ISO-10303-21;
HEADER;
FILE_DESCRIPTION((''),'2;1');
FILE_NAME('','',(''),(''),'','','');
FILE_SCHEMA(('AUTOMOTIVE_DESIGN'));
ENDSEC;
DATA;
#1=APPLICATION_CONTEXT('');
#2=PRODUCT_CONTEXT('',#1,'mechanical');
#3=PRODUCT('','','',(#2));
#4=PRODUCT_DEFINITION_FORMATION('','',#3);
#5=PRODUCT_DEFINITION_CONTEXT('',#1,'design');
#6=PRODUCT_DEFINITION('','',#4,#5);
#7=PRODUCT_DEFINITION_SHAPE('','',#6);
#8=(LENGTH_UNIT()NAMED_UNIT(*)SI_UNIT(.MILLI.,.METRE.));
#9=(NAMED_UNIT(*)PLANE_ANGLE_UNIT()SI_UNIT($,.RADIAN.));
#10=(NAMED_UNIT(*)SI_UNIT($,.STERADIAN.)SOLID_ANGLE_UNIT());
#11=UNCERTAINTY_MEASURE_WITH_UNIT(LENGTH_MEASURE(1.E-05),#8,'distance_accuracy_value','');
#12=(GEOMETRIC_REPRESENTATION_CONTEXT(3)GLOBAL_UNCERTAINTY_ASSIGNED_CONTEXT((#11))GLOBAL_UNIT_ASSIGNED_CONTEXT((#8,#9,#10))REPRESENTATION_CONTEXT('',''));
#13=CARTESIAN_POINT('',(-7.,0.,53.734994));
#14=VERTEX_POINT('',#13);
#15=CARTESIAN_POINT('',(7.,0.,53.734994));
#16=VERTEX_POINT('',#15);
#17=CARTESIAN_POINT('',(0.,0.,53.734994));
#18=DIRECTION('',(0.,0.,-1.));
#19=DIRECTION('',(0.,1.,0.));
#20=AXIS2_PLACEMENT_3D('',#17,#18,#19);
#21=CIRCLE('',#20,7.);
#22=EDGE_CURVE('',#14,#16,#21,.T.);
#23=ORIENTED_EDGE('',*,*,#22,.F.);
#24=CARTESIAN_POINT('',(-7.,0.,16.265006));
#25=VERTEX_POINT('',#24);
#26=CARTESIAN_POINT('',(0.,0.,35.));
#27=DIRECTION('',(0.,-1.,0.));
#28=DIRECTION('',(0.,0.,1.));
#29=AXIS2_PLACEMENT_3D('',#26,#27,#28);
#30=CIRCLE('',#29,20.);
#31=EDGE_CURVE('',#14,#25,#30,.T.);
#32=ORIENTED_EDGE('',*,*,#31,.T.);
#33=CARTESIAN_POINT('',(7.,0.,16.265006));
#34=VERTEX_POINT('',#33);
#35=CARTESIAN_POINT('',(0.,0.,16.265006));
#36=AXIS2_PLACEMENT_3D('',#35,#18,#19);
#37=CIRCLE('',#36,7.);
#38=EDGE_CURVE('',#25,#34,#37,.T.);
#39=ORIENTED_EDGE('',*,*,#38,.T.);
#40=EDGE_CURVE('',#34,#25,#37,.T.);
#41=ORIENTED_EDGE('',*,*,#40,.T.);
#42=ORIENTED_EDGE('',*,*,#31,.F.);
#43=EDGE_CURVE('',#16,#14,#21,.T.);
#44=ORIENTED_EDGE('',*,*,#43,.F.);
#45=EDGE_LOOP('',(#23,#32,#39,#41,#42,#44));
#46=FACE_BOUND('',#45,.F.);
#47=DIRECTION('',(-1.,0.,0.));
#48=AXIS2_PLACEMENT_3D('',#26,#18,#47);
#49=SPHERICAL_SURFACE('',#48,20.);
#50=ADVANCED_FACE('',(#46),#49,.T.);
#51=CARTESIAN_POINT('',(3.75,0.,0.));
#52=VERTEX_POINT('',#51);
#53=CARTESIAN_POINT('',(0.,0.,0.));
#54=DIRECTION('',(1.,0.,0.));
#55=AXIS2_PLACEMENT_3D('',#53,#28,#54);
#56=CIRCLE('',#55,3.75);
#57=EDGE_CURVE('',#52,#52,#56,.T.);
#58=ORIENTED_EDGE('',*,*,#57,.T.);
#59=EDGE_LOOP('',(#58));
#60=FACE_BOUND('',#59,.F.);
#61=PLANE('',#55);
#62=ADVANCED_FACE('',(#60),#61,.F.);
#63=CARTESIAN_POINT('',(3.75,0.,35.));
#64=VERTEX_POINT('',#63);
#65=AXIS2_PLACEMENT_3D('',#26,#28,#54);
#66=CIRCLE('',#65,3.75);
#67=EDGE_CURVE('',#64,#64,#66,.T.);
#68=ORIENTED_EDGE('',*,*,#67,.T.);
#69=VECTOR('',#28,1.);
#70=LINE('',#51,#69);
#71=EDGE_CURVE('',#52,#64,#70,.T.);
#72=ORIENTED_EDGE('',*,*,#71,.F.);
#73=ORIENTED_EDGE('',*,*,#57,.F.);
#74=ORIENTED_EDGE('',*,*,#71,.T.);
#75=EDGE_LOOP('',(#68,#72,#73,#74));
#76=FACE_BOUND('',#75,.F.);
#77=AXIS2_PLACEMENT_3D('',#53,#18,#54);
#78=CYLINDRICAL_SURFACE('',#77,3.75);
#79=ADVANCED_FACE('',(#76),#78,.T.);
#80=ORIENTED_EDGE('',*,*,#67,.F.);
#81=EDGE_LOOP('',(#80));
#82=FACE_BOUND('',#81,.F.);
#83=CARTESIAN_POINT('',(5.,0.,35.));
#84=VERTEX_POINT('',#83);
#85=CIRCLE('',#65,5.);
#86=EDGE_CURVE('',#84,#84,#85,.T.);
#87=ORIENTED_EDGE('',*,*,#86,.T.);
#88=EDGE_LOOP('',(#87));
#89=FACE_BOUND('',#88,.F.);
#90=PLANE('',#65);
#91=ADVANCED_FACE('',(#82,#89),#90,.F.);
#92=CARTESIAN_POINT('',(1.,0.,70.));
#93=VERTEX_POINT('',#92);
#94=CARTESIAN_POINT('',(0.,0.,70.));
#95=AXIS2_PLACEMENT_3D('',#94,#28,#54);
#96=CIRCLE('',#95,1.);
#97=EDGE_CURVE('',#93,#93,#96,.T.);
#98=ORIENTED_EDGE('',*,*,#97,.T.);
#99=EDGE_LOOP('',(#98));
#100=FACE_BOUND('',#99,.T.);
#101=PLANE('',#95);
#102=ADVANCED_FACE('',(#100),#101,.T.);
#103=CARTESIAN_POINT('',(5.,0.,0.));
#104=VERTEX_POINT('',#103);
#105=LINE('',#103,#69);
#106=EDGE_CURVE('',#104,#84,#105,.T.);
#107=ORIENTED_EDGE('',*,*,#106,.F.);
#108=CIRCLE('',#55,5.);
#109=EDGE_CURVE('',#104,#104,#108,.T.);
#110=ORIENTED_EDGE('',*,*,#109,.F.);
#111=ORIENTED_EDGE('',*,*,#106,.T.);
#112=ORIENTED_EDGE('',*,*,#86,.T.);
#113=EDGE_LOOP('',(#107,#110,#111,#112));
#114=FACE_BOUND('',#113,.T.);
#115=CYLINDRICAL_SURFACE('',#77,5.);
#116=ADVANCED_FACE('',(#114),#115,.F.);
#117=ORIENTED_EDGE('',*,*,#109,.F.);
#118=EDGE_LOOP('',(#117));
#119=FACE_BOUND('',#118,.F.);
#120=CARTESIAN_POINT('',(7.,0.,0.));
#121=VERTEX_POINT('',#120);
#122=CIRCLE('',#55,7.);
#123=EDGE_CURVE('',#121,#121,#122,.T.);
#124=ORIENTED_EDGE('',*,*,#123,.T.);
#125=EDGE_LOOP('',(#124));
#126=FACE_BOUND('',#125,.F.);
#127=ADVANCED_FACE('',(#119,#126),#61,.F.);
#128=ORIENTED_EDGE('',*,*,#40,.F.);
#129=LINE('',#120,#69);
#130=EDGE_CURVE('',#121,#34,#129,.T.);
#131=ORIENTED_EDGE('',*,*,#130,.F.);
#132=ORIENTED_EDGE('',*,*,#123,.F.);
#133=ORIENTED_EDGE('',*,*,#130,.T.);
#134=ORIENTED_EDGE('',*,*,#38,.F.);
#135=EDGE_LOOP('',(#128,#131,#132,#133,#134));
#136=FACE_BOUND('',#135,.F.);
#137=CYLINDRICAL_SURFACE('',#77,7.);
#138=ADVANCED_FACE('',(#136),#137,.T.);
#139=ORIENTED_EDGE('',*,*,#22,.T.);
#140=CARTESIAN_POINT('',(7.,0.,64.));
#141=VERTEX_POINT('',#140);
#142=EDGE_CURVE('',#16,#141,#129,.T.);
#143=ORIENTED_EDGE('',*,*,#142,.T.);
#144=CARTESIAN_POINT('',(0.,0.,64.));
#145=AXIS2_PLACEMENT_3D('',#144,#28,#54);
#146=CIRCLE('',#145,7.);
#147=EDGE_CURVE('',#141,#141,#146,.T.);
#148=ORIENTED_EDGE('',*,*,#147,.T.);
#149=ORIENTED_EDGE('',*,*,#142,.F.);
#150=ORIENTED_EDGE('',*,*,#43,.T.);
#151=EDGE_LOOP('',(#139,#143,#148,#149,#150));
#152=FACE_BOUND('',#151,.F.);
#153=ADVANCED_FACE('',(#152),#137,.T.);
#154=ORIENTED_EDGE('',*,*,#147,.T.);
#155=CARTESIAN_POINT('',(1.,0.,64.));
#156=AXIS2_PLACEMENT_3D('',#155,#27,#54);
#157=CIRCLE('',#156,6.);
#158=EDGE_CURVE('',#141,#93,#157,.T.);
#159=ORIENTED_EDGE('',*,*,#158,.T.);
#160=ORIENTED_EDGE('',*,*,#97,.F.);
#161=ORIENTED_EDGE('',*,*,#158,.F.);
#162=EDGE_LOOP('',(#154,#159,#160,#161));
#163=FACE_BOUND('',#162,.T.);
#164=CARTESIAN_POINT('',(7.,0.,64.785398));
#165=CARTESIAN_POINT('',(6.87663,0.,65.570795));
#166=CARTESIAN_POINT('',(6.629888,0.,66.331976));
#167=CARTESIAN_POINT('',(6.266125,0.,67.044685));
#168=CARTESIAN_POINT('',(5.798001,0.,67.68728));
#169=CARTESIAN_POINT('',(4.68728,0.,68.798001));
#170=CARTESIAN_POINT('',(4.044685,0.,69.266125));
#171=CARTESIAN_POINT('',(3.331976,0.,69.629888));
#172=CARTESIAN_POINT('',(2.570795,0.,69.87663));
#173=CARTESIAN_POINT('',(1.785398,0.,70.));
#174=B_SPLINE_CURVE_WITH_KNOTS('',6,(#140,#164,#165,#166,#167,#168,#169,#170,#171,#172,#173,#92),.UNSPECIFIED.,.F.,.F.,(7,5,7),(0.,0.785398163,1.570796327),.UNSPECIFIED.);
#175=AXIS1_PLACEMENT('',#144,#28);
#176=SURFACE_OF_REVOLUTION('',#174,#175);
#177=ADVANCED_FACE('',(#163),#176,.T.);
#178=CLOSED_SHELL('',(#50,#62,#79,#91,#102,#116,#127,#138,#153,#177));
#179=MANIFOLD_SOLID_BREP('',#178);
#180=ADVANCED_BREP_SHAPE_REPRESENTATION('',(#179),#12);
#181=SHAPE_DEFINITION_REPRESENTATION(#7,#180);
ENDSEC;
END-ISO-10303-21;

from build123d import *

# Parameters (mm, degrees)
F0_R     = 7
F0_R_2   = 5
F0_R_3   = 3.75
F1_DEPTH = 70
F4_DEPTH = 35
F5_R     = 6


with BuildPart() as f1:
    # F0 (on Top) → F1 (new body)
    with BuildSketch(Plane.XY):
        Circle(F0_R)
        Circle(F0_R_2, mode=Mode.SUBTRACT)
        Circle(F0_R_2)
        Circle(F0_R_3, mode=Mode.SUBTRACT)
        Circle(F0_R_3)
    extrude(amount=F1_DEPTH)

    # F2 (on Front) → F3 (revolve)
    with BuildSketch(Plane.XZ):
        with BuildLine():
            ThreePointArc((0, 55), (-20, 35), (0, 15))
            Line((0, 15), (0, 55))
        make_face()
    revolve(axis=Axis((0, 0, 35), (0, 0, 1)))

    # F0 (on Top) → F4 (cut)
    with BuildSketch(Plane.XY):
        Circle(F0_R_2)
        Circle(F0_R_3, mode=Mode.SUBTRACT)
    extrude(amount=F4_DEPTH, mode=Mode.SUBTRACT)

    # F5
    f5_edges = [f1.edges().sort_by_distance(p)[0] for p in [
        (-7, 0, 70),
    ]]
    fillet(f5_edges, radius=F5_R)


solid = f1.part
